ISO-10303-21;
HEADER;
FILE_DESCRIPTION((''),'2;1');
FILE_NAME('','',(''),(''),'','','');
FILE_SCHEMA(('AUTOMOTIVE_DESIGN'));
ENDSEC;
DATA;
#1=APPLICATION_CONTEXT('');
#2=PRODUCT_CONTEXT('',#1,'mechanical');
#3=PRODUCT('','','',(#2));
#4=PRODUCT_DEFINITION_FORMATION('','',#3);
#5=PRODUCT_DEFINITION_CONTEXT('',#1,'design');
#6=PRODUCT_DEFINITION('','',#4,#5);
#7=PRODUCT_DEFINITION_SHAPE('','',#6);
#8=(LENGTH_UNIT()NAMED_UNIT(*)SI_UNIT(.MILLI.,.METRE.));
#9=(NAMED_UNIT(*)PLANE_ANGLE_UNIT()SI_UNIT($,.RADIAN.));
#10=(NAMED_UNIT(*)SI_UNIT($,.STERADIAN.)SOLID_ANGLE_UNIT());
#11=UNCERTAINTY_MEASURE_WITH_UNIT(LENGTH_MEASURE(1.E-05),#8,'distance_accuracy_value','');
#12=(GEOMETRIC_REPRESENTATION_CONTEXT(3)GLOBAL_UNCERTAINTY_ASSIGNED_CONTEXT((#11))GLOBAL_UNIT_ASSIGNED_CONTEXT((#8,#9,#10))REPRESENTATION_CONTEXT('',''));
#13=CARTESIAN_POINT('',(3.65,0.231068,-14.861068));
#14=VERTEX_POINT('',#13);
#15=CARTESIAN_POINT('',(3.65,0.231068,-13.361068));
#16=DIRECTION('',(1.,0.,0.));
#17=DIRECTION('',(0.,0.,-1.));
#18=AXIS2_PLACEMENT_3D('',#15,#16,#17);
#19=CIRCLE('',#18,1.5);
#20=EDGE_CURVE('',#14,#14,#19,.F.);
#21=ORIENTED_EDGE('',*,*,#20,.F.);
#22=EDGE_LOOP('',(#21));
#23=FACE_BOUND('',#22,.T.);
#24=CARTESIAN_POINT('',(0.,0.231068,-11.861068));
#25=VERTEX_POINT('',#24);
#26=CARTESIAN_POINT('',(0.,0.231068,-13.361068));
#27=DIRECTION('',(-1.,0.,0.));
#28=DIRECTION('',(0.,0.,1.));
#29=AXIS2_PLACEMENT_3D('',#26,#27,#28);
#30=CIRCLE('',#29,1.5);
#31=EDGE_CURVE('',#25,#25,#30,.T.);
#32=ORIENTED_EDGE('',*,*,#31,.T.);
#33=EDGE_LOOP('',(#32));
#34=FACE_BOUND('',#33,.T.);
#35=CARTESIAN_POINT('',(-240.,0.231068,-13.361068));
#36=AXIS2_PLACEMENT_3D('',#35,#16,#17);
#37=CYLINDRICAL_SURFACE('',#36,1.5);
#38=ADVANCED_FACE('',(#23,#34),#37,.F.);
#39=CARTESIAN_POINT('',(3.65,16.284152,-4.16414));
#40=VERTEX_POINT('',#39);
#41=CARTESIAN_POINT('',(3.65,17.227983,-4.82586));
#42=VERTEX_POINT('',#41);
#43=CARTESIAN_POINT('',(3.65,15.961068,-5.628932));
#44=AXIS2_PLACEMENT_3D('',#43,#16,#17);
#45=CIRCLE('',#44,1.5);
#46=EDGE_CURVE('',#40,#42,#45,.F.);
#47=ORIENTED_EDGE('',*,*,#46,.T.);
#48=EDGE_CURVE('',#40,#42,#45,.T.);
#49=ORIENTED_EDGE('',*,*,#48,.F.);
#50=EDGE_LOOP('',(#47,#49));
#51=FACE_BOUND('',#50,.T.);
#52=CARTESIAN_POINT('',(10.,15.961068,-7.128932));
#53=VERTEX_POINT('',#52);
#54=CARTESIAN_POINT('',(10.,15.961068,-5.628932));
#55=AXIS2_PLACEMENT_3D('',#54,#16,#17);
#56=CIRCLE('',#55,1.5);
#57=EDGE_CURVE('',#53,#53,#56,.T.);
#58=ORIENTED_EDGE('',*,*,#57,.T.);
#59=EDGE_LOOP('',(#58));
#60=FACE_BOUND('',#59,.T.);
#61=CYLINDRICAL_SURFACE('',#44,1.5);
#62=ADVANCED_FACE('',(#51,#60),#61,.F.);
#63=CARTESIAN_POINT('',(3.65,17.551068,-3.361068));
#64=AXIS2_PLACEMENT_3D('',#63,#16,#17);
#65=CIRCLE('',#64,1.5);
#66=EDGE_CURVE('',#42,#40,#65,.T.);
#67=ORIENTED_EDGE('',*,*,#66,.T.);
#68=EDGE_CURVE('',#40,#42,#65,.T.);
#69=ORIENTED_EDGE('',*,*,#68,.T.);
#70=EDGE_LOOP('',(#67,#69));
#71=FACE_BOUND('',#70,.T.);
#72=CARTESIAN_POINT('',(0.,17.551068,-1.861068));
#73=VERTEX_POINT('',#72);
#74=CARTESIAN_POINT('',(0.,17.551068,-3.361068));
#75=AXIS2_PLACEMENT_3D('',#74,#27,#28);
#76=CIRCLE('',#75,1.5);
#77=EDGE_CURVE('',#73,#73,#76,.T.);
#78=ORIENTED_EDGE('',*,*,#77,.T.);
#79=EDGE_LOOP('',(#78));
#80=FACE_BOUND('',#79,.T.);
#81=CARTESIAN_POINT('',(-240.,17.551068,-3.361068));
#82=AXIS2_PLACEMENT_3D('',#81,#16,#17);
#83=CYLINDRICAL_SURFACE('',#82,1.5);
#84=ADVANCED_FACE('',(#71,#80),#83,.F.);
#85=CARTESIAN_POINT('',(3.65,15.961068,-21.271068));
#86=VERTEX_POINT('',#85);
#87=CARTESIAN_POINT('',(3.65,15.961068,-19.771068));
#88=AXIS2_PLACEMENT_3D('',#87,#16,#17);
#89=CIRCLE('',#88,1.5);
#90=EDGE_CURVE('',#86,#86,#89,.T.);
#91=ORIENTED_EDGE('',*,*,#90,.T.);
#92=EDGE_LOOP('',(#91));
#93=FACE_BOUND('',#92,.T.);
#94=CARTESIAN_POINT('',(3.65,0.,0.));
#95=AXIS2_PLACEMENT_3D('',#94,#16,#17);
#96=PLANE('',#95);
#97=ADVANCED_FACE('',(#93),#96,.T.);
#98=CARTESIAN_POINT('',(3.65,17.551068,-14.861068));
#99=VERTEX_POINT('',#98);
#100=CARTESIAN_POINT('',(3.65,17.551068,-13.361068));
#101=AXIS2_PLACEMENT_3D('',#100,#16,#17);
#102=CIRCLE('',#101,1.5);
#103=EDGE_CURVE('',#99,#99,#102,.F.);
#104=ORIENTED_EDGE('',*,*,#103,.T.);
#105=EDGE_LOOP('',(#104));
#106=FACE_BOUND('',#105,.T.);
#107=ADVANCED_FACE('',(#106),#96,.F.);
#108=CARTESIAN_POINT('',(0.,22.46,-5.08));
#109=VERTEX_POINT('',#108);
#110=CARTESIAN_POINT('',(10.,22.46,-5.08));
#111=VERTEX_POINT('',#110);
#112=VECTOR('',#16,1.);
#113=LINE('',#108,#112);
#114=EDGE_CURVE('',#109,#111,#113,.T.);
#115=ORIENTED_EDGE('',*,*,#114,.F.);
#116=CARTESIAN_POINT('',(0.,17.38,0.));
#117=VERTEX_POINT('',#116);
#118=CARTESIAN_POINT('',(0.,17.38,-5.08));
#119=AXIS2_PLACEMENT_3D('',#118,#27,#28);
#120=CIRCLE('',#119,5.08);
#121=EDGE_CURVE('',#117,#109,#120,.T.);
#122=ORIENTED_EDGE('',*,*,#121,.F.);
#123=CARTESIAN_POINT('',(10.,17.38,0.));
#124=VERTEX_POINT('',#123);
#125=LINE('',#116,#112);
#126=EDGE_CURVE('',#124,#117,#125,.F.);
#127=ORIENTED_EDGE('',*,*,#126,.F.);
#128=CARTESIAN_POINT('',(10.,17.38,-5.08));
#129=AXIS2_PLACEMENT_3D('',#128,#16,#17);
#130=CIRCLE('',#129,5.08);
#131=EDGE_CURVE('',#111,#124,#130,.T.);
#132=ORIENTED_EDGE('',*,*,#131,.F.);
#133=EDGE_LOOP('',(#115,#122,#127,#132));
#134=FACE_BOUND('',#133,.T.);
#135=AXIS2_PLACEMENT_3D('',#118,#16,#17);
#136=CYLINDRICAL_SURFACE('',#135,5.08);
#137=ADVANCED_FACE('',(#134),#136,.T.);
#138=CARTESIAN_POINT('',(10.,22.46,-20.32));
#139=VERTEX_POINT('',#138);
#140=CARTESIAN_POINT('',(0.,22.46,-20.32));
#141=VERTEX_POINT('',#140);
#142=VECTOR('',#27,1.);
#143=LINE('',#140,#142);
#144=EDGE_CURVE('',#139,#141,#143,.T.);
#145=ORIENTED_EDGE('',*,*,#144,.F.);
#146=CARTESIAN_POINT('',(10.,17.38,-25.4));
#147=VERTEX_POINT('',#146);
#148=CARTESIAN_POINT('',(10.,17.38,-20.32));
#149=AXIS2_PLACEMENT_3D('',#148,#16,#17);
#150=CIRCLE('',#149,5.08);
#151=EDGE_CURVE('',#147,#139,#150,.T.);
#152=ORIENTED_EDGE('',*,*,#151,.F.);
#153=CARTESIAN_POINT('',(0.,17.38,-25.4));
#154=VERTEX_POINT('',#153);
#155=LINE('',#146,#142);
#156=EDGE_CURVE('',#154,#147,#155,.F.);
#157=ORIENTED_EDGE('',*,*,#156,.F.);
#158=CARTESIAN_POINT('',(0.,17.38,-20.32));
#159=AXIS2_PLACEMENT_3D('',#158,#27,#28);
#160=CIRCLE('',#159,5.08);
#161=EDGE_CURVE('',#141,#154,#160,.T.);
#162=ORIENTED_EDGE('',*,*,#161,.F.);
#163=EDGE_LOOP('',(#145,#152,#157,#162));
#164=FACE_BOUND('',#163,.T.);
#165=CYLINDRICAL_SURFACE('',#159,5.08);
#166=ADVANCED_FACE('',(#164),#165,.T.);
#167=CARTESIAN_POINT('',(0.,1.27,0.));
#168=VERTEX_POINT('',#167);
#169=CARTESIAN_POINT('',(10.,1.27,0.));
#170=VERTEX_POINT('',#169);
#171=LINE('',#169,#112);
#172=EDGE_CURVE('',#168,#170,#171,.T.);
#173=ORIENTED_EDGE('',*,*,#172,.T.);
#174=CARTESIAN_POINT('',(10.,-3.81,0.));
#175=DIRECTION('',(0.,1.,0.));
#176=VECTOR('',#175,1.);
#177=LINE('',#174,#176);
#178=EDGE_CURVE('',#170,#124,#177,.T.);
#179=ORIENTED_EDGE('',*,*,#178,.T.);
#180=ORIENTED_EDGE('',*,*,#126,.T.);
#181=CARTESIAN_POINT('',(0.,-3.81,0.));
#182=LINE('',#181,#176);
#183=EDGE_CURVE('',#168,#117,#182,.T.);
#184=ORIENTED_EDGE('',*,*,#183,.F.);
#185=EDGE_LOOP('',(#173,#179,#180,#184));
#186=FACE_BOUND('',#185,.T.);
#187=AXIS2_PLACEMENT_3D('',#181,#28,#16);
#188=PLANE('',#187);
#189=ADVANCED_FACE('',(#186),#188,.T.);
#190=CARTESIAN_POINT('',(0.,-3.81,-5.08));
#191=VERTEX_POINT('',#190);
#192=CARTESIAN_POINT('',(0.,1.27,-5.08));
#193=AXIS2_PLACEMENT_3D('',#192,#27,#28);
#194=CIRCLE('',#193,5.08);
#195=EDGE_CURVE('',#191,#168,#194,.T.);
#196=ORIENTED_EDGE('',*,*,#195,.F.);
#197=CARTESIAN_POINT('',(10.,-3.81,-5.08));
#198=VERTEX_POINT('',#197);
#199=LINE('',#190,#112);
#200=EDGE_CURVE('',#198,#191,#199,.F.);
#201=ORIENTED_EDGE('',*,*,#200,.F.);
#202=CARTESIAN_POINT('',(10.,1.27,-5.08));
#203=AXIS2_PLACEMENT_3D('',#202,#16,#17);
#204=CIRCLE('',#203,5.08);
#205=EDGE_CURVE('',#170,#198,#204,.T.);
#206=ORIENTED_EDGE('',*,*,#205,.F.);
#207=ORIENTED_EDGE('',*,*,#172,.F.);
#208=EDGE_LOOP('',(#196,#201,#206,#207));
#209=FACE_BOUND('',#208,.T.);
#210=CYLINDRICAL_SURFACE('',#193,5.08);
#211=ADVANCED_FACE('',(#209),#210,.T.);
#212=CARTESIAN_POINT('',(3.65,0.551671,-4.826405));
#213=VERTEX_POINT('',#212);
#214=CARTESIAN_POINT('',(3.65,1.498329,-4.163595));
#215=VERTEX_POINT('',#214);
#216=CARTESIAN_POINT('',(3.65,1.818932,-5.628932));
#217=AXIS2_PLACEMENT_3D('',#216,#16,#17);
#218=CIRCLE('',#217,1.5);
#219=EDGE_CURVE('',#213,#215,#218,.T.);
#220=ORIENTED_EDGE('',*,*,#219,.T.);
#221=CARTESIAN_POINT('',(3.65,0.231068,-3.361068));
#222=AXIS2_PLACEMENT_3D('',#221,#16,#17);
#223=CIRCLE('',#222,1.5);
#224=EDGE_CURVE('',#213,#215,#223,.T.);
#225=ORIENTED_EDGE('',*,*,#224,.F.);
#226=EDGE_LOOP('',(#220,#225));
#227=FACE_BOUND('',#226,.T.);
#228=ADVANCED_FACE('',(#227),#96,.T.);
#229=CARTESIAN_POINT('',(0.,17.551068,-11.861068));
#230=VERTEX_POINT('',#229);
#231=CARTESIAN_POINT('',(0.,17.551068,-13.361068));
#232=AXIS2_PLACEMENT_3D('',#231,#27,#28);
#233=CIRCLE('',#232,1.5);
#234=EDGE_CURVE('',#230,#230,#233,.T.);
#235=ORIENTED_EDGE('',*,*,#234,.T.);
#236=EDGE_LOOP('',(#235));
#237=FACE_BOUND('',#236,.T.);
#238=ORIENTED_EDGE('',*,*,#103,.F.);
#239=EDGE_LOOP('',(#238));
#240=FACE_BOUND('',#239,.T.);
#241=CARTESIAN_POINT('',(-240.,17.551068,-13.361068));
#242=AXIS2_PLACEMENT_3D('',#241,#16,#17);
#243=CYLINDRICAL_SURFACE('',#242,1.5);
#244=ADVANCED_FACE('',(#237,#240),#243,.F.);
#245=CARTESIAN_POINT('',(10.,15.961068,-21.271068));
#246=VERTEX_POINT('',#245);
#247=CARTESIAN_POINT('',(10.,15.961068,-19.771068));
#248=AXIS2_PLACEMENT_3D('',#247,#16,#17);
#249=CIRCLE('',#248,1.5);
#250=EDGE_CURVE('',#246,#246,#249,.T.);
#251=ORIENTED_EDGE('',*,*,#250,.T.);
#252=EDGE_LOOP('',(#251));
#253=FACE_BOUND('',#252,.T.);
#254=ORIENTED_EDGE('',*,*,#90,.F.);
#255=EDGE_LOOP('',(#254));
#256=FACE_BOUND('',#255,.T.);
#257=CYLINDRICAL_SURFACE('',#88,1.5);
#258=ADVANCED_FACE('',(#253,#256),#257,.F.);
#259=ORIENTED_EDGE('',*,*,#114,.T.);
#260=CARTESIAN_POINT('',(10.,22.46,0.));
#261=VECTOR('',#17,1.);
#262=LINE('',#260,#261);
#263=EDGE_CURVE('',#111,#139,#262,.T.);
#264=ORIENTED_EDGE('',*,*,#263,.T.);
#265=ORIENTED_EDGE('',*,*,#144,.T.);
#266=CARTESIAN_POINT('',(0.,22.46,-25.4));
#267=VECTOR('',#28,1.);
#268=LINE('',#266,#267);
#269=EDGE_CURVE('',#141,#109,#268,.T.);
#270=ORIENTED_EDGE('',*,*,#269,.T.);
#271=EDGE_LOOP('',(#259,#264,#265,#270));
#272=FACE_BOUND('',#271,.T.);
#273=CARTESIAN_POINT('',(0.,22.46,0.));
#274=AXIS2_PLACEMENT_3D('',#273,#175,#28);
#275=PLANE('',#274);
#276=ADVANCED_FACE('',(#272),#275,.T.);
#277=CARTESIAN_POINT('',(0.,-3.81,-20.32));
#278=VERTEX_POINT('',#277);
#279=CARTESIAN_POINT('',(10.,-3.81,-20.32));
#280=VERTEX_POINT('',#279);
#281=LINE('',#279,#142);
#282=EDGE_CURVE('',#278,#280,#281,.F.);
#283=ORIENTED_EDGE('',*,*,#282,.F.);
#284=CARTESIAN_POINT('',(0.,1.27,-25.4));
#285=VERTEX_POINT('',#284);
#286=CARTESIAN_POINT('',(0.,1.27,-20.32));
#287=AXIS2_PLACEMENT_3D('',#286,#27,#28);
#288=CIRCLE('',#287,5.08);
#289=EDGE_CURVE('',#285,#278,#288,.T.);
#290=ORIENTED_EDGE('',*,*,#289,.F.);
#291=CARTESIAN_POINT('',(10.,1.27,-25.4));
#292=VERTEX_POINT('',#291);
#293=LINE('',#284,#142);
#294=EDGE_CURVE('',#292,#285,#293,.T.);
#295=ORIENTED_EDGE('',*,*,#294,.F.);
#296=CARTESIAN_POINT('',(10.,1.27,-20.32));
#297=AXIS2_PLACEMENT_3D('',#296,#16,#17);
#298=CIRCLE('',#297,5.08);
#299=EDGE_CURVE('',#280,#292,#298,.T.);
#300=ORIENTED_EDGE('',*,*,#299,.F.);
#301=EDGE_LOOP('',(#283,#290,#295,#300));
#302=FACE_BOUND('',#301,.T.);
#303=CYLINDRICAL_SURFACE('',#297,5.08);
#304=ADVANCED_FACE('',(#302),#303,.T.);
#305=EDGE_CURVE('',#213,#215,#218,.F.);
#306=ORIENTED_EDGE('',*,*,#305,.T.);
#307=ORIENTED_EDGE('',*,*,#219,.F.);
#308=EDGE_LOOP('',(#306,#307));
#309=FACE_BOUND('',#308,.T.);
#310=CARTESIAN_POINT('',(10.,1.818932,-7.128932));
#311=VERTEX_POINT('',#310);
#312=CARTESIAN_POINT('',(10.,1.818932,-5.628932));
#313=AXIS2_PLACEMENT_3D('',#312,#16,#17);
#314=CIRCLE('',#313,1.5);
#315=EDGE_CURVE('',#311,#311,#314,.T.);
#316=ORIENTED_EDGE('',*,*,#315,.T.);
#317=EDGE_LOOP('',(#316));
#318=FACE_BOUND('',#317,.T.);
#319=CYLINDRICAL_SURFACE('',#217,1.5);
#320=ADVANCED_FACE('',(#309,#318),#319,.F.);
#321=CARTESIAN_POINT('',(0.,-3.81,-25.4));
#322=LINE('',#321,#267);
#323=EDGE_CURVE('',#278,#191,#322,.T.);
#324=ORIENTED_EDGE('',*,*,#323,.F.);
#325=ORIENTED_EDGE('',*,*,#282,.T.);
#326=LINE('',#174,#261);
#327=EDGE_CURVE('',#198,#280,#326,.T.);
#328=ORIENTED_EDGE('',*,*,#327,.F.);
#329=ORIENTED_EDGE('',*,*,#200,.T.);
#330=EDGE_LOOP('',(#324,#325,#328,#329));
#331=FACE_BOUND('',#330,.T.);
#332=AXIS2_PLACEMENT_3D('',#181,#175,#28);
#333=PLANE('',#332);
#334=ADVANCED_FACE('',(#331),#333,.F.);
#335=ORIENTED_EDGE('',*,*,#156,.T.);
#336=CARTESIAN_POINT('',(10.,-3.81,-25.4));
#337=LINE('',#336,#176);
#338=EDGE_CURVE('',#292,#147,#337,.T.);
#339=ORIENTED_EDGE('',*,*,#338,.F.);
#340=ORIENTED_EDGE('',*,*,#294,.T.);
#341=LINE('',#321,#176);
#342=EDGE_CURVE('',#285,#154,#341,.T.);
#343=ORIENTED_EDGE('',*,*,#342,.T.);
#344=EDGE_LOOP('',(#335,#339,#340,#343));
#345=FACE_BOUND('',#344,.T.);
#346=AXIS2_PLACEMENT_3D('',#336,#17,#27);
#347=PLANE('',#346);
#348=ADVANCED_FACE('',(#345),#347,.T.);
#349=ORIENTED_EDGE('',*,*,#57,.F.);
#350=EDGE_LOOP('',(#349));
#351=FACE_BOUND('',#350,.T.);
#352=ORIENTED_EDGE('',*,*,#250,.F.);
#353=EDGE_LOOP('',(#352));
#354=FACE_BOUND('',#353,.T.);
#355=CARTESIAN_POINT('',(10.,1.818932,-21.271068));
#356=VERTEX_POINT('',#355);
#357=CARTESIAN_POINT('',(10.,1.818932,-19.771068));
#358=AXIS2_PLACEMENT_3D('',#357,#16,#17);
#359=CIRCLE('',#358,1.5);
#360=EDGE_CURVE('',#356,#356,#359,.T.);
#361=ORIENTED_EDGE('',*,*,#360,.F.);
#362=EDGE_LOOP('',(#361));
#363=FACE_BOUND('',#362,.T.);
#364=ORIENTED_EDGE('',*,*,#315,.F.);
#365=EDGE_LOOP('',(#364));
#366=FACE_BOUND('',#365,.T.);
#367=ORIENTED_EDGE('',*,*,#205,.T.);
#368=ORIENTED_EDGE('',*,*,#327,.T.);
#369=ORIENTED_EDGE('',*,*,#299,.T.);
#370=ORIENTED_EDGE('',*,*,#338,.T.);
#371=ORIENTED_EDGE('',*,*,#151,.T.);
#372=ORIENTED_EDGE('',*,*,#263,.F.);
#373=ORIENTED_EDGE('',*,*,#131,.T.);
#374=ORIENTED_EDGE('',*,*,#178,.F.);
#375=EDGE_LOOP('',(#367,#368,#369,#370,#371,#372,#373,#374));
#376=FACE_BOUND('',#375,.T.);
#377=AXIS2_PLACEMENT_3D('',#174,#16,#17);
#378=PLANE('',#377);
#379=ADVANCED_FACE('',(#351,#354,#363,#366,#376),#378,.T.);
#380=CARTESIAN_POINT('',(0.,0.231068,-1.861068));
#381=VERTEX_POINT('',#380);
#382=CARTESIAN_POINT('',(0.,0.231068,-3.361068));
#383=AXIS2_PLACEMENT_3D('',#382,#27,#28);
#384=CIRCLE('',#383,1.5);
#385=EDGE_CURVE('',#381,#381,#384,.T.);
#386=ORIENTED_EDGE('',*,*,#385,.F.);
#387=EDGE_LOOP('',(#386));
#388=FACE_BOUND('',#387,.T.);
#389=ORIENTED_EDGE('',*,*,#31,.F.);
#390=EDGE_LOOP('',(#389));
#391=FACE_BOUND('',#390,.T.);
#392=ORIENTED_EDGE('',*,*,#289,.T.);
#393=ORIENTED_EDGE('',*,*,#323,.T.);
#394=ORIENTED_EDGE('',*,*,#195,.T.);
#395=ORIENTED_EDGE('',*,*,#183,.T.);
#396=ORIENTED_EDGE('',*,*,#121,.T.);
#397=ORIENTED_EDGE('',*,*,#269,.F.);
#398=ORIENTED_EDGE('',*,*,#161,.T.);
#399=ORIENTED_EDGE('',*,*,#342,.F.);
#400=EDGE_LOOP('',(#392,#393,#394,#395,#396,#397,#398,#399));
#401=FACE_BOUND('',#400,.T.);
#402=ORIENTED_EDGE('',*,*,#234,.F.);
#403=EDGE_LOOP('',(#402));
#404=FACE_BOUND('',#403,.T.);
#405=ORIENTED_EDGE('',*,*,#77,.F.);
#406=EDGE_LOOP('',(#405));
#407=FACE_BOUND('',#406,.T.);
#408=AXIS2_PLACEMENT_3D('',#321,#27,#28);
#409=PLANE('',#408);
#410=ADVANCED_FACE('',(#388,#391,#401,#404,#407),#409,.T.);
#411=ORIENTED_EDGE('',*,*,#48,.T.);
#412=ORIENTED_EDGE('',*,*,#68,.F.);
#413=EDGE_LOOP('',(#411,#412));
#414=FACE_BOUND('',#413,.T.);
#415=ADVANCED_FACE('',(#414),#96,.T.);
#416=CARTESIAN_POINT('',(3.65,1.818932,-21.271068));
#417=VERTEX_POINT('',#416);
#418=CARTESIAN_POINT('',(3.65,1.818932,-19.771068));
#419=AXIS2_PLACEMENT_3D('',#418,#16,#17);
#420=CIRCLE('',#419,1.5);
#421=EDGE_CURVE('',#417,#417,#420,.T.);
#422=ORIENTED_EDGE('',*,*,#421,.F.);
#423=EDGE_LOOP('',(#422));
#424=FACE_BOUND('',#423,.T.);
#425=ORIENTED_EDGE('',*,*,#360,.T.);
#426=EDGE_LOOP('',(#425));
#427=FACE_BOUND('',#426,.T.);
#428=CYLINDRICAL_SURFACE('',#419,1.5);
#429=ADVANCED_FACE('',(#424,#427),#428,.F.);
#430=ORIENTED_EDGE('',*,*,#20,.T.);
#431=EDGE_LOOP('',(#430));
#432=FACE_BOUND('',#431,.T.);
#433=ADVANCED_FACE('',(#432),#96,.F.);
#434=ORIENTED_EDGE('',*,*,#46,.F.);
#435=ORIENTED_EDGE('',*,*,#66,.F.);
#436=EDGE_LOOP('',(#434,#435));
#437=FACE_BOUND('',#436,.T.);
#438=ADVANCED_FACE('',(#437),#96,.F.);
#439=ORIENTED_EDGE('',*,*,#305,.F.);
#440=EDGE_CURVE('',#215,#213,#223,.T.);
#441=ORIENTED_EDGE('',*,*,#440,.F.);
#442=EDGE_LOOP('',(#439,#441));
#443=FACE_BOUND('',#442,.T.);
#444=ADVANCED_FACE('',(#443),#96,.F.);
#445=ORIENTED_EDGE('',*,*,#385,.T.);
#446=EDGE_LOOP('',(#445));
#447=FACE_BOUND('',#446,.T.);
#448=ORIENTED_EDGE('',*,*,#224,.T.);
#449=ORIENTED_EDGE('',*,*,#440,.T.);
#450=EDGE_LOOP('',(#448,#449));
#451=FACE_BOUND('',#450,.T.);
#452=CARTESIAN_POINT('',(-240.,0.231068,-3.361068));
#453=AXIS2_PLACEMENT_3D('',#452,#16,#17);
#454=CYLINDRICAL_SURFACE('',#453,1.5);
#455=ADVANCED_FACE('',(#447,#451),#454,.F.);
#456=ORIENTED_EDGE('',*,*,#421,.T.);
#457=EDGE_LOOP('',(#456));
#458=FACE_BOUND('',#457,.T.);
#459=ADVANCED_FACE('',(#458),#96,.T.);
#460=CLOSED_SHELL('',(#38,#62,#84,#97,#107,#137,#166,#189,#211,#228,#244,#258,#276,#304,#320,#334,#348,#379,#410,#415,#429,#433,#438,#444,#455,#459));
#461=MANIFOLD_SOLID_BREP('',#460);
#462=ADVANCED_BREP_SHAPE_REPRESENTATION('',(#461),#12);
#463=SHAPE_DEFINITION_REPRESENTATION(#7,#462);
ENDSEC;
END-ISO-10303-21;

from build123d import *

# Parameters (mm, degrees)
BOSS_EXTRUDE1_DEPTH      = 22.46
BOSS_EXTRUDE1_DEPTH_BACK = 3.81
SKETCH1_W                = 10
SKETCH1_H                = 25.4
SKETCH4_R                = 1.5
CUT_EXTRUDE1_DEPTH       = 6.35
SKETCH5_R                = 1.5
CUT_EXTRUDE2_DEPTH       = 250
SKETCH5_3_R              = 1.5
BOSS_EXTRUDE2_DEPTH      = 6.35
FILLET1_R                = 5.08


with BuildPart() as part:
    # Sketch1 → Boss-Extrude1 (new, two sides: drawn at the far end of the back side and taken through both)
    with BuildSketch(Plane(origin=(0, 0, 0), x_dir=(1, 0, 0), z_dir=(0, 1, 0)).offset(-BOSS_EXTRUDE1_DEPTH_BACK)):
        with Locations((5, 12.7)):
            Rectangle(SKETCH1_W, SKETCH1_H)
    extrude(amount=BOSS_EXTRUDE1_DEPTH + BOSS_EXTRUDE1_DEPTH_BACK)

    # Sketch4 → Cut-Extrude1 (cut)
    with BuildSketch(Plane(origin=(10, 0, 0), x_dir=(0, 0, -1), z_dir=(1, 0, 0))):
        with Locations((19.771067812, 1.818932188)):
            Circle(SKETCH4_R)
        with Locations((5.628932188, 1.818932188)):
            Circle(SKETCH4_R)
        with Locations((5.628932188, 15.961067812)):
            Circle(SKETCH4_R)
        with Locations((19.771067812, 15.961067812)):
            Circle(SKETCH4_R)
    extrude(amount=-CUT_EXTRUDE1_DEPTH, mode=Mode.SUBTRACT)

    # Sketch5 → Cut-Extrude2 (cut)
    with BuildSketch(Plane(origin=(10, 0, 0), x_dir=(0, 0, -1), z_dir=(1, 0, 0))):
        with Locations((13.361067812, 17.551067934)):
            Circle(SKETCH5_R)
        with Locations((3.361067812, 17.551067934)):
            Circle(SKETCH5_R)
        with Locations((3.361067812, 0.231067934)):
            Circle(SKETCH5_R)
        with Locations((13.361067812, 0.231067934)):
            Circle(SKETCH5_R)
    extrude(amount=-CUT_EXTRUDE2_DEPTH, mode=Mode.SUBTRACT)

    # Sketch5<3> → Boss-Extrude2 (add)
    with BuildSketch(Plane(origin=(10, 0, 0), x_dir=(0, 0, -1), z_dir=(1, 0, 0))):
        with Locations((13.361067812, 17.551067934)):
            Circle(SKETCH5_3_R)
        with BuildLine():
            ThreePointArc((4.825860086, 17.227983436), (2.421553774, 18.720389692), (3.361067812, 16.051067934))
            ThreePointArc((3.361067812, 16.051067934), (3.779174595, 16.110517095), (4.164139914, 16.284152309))
            ThreePointArc((4.164139914, 16.284152309), (4.40071946, 16.822167977), (4.825860086, 17.227983436))
        make_face()
        with BuildLine():
            ThreePointArc((4.826405156, 0.551671219), (4.400175744, 0.958608063), (4.163594844, 1.498328903))
            ThreePointArc((4.163594844, 1.498328903), (2.132311367, -0.629256191), (4.826405156, 0.551671219))
        make_face()
        with Locations((13.361067812, 0.231067934)):
            Circle(SKETCH5_3_R)
    extrude(amount=-BOSS_EXTRUDE2_DEPTH)

    # Fillet1
    fillet1_edges = [part.edges().sort_by_distance(p)[0] for p in [
        (5, 22.46, 0),
        (5, 22.46, -25.4),
        (5, -3.81, -25.4),
        (5, -3.81, 0),
    ]]
    fillet(fillet1_edges, radius=FILLET1_R)


solid = part.part
